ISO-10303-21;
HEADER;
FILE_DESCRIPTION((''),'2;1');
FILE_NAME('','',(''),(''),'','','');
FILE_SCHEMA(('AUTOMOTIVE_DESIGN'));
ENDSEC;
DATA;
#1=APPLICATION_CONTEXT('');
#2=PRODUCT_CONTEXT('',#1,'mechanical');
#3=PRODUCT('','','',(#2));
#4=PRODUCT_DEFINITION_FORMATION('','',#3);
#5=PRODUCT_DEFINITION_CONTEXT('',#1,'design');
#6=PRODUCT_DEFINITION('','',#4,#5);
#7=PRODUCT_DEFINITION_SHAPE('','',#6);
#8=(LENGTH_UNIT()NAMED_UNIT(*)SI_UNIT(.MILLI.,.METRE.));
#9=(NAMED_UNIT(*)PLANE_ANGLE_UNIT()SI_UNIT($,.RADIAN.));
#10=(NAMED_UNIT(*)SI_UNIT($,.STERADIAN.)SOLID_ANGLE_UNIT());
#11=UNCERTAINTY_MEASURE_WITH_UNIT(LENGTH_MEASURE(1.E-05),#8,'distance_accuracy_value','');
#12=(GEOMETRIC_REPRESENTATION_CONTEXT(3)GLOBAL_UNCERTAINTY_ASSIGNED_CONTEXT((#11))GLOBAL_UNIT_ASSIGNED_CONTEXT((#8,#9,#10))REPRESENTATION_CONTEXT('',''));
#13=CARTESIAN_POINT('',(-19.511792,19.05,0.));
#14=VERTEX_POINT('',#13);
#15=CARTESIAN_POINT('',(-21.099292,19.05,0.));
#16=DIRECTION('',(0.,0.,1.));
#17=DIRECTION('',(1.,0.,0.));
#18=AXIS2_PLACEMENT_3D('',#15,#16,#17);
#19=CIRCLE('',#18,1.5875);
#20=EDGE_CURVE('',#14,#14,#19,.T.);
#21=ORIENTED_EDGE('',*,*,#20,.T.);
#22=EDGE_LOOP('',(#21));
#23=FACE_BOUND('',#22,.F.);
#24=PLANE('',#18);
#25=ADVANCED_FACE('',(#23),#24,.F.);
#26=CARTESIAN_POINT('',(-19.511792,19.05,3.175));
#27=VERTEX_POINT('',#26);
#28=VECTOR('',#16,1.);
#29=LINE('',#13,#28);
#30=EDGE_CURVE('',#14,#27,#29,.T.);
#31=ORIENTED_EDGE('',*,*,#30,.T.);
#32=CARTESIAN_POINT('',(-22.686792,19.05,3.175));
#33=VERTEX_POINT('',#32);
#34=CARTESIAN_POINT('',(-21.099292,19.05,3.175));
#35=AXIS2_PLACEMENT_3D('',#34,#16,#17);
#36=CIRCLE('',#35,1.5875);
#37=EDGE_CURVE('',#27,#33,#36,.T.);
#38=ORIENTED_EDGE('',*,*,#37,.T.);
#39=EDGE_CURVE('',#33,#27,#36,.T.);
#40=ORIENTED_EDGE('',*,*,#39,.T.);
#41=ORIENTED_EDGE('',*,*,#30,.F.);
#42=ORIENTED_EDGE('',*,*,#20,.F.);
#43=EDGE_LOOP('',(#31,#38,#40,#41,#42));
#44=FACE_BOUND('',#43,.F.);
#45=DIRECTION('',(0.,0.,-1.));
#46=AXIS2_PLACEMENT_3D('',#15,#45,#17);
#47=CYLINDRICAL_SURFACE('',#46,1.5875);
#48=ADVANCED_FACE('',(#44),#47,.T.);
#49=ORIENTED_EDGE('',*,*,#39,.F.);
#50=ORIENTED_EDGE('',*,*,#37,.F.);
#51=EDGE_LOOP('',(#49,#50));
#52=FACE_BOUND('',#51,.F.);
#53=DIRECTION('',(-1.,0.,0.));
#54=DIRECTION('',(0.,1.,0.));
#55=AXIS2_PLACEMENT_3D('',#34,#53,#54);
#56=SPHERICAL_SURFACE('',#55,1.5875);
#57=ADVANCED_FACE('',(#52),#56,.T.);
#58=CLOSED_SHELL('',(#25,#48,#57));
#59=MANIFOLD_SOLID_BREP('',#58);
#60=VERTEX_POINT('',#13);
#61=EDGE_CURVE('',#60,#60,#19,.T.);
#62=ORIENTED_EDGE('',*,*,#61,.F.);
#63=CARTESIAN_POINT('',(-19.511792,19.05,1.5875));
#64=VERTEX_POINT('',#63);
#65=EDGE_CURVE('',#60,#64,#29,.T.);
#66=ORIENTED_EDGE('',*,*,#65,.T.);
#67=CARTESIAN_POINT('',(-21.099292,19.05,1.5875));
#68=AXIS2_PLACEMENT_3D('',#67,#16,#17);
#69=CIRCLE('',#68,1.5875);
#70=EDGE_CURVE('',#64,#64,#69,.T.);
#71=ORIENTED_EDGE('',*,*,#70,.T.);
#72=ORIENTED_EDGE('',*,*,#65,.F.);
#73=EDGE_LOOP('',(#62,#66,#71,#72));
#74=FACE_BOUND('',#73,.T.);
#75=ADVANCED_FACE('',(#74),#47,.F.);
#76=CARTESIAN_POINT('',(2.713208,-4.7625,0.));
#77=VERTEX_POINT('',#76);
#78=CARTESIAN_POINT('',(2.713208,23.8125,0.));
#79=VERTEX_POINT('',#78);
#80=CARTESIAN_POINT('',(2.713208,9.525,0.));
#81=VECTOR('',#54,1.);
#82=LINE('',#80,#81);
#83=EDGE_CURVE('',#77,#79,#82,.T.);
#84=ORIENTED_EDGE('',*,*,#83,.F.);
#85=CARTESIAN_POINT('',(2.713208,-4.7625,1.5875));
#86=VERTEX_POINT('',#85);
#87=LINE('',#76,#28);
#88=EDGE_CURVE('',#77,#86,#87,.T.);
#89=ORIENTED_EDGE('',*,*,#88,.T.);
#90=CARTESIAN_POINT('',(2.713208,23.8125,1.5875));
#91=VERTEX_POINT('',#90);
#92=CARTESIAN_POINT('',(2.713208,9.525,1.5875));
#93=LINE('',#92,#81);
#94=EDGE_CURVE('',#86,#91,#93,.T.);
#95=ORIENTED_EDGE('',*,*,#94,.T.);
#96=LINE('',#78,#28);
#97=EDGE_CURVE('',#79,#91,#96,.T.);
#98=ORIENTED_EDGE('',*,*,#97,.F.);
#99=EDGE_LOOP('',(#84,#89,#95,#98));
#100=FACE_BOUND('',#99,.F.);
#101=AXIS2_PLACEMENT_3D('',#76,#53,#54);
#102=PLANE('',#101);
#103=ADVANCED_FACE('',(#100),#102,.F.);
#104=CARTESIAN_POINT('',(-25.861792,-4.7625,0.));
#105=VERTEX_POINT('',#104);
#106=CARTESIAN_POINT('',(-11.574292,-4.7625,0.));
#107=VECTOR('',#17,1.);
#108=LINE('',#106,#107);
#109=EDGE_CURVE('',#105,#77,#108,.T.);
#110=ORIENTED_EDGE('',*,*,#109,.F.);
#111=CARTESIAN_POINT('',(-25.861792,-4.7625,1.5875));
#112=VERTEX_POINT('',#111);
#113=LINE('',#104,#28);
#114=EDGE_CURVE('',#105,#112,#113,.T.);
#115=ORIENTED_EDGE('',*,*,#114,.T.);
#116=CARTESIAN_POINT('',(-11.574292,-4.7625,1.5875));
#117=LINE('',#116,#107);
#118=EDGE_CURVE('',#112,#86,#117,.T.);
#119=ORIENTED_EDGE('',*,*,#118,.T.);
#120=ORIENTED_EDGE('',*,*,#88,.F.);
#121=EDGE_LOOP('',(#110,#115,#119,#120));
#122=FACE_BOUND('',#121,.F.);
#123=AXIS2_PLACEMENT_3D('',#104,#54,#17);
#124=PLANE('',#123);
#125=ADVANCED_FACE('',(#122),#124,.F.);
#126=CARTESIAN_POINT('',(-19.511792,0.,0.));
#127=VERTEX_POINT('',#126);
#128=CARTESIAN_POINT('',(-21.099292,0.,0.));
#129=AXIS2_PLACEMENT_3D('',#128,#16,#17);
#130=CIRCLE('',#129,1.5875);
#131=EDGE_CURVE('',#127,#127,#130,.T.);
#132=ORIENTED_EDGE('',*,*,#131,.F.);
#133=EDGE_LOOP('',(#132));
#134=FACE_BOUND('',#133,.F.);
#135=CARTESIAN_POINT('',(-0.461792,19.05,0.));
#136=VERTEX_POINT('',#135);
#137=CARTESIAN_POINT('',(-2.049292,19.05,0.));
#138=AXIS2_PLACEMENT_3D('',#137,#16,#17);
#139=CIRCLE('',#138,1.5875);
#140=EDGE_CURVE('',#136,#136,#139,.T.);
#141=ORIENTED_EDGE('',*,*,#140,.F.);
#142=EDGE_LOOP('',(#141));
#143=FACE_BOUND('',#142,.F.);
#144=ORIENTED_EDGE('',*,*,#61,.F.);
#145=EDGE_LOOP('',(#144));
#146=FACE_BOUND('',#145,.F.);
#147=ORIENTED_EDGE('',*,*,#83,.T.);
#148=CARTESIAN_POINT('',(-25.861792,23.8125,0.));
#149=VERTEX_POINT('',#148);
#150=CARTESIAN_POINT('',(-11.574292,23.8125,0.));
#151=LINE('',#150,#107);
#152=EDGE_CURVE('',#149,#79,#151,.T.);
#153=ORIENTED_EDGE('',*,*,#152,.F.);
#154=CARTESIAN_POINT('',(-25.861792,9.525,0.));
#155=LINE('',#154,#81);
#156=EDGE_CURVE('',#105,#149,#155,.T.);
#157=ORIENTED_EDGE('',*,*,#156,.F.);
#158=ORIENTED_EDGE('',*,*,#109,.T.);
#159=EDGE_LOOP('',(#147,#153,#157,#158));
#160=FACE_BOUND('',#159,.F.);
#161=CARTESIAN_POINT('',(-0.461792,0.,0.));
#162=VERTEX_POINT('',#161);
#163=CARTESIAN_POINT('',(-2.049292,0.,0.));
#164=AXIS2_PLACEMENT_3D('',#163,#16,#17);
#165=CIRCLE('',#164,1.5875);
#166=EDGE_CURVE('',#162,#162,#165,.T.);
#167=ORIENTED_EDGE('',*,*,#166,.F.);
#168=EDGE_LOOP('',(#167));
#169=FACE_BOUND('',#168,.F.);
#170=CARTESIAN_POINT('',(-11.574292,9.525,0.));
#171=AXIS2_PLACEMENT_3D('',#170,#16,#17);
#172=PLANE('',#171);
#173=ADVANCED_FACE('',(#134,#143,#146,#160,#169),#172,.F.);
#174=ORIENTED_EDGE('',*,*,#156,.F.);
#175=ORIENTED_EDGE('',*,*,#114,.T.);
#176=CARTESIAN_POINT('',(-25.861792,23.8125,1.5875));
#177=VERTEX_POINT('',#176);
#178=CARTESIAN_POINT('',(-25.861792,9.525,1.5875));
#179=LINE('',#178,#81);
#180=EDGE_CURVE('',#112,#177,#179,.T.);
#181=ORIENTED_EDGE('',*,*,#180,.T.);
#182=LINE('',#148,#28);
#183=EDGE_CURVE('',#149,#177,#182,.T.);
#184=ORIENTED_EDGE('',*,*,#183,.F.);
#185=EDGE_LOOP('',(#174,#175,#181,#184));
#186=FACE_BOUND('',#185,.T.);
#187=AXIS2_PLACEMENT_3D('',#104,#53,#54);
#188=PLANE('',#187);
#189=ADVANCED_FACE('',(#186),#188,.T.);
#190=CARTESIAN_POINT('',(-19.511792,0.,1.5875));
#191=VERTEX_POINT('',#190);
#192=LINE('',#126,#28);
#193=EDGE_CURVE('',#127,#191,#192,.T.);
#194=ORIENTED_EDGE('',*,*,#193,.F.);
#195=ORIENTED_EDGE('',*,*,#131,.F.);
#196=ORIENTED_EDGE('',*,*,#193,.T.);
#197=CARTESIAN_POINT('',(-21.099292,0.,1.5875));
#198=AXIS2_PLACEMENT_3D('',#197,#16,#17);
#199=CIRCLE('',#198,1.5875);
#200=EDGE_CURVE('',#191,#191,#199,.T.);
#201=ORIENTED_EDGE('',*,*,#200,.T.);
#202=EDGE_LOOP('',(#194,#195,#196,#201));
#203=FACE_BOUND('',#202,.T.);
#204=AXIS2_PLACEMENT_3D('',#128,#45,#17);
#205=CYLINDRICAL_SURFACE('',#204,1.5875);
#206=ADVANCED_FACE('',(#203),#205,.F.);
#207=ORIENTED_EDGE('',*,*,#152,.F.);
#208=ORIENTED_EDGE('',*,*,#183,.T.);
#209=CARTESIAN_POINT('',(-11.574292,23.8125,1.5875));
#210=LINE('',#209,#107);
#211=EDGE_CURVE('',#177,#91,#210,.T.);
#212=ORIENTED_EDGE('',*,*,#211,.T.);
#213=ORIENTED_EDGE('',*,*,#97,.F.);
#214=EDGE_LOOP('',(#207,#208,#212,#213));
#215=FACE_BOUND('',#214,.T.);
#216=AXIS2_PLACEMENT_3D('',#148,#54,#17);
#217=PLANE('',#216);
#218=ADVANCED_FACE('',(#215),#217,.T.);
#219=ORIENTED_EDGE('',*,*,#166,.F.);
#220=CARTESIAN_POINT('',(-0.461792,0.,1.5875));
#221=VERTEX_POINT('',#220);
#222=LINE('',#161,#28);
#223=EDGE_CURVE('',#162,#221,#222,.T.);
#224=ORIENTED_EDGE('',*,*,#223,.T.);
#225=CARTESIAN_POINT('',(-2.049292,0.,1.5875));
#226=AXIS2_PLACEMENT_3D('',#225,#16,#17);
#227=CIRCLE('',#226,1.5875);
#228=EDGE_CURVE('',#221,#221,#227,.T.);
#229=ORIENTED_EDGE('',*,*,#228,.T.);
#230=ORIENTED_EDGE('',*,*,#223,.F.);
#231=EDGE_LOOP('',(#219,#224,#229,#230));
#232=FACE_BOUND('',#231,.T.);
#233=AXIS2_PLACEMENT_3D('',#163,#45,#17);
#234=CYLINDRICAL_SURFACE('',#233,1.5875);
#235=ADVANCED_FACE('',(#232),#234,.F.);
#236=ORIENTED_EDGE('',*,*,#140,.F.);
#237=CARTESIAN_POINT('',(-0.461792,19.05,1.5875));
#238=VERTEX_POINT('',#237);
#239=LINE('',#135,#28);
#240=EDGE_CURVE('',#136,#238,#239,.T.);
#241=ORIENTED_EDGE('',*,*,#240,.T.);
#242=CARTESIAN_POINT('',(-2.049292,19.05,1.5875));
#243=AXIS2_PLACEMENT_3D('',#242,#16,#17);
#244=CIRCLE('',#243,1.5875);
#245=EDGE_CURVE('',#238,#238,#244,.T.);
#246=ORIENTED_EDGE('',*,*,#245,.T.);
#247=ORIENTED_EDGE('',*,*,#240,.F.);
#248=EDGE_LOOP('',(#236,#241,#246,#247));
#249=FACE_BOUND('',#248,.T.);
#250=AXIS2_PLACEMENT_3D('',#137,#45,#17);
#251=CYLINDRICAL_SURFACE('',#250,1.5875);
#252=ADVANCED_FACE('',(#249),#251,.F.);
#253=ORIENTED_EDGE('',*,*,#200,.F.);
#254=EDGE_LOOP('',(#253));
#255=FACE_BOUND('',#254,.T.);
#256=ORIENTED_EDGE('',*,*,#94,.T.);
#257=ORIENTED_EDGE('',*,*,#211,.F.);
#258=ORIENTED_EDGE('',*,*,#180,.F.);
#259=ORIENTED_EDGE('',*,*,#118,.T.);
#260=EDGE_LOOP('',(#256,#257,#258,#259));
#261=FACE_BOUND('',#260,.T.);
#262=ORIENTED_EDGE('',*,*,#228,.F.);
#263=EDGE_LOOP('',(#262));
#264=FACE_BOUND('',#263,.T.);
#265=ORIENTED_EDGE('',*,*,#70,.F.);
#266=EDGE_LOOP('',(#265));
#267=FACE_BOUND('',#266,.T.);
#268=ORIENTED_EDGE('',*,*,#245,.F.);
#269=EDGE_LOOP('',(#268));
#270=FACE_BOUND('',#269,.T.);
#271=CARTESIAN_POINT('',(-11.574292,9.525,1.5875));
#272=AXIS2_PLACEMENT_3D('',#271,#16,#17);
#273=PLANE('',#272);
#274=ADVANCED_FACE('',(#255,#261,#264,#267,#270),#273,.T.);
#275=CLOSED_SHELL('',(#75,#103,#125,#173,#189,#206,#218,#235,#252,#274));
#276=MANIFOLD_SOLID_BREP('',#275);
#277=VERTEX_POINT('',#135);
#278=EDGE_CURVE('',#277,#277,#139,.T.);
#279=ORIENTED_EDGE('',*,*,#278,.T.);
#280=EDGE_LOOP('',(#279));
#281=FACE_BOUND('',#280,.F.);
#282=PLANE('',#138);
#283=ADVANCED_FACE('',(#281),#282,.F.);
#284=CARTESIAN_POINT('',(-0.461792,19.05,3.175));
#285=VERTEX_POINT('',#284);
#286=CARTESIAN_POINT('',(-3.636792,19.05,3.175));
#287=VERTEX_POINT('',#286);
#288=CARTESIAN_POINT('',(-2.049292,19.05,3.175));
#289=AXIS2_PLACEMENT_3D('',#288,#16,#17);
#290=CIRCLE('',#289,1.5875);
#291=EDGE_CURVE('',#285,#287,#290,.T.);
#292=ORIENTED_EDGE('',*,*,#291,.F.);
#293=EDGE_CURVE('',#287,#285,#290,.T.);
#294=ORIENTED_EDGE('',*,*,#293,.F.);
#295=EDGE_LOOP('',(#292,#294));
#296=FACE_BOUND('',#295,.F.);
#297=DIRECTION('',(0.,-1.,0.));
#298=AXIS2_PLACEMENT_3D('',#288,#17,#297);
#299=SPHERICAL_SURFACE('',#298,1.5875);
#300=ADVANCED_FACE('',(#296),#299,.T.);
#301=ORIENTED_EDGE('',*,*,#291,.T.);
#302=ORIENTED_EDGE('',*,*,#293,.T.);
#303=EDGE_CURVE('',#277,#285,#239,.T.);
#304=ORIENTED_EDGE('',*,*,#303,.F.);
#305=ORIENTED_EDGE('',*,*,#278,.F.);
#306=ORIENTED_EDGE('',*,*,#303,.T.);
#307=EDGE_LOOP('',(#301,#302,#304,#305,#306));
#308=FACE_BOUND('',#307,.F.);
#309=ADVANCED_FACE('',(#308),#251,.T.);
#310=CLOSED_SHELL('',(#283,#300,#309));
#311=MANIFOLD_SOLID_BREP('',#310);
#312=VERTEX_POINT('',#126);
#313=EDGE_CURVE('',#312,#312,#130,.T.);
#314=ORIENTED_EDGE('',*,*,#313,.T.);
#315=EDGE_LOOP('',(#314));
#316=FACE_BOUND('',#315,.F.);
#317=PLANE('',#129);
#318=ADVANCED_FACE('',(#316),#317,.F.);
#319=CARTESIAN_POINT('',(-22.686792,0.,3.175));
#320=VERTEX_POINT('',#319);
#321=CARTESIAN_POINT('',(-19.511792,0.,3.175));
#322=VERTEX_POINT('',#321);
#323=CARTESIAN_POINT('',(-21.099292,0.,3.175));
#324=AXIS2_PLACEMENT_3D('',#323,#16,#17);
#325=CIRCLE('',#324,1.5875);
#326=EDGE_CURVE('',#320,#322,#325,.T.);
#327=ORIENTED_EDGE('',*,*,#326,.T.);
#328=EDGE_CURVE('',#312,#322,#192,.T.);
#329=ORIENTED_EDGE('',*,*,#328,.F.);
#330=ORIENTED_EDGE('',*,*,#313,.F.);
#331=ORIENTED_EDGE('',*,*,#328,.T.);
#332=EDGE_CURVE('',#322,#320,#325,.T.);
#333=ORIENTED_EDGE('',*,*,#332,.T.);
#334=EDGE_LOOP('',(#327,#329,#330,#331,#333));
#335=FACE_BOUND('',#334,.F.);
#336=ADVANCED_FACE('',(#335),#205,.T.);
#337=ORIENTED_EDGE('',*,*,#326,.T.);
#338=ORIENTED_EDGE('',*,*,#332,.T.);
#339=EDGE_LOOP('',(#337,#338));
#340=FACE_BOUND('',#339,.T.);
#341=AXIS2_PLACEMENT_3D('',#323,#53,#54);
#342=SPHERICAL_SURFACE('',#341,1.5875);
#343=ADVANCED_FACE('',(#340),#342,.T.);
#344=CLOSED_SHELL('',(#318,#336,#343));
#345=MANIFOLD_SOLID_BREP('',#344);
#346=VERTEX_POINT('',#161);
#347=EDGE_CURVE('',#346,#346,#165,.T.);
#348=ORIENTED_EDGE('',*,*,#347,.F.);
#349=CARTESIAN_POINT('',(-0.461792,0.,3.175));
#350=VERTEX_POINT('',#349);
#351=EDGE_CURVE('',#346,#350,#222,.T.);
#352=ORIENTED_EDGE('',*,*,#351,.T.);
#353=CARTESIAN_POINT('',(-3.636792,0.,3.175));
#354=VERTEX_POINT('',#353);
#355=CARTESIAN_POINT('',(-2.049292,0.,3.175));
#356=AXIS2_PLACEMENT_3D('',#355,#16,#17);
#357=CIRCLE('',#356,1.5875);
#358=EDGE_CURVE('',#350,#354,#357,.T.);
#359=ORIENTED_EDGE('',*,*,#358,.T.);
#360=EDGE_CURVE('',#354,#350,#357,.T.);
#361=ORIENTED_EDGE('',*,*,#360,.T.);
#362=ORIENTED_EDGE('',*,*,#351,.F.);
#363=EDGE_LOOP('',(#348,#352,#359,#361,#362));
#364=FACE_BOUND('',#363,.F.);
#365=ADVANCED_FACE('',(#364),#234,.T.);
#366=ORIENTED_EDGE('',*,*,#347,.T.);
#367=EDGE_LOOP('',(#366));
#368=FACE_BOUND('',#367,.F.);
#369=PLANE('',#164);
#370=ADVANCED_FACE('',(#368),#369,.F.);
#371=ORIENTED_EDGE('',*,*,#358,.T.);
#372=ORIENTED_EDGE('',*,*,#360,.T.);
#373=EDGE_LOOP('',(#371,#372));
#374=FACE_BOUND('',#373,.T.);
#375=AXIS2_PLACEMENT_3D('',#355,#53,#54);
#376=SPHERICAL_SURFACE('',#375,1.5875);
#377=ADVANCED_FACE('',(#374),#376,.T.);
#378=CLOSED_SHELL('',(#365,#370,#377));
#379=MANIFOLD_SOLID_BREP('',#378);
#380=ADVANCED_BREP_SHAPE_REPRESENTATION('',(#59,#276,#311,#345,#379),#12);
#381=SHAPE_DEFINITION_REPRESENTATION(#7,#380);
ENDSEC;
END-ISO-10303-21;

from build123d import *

# Parameters (mm, degrees)
F0_R     = 1.5875
F1_DEPTH = 3.175
F0_W     = 28.575
F0_H     = 28.575
F2_DEPTH = 1.5875


with BuildPart() as f1:
    # F0 (on Top) → F1 (new body)
    with BuildSketch(Plane.XY):
        with Locations((-21.0992920049, 19.05)):
            Circle(F0_R)
    extrude(amount=F1_DEPTH)

    # F7 (on face) → F8 (revolve)
    with BuildSketch(Plane.XY.offset(3.175)):
        with BuildLine():
            Line((-22.6867920049, 19.05), (-21.0992920049, 19.05))
            Line((-21.0992920049, 19.05), (-19.5117920049, 19.05))
            ThreePointArc((-19.5117920049, 19.05), (-21.0992920049, 20.6375), (-22.6867920049, 19.05))
        make_face()
    revolve(axis=Axis((-21.0992920049, 19.05, 3.175), (1, 0, 0)))


with BuildPart() as f1b:
    # F0 (on Top) → F1, piece 2 (new body)
    with BuildSketch(Plane.XY):
        with Locations((-2.0492920049, 19.05)):
            Circle(F0_R)
    extrude(amount=F1_DEPTH)

    # F9 (on face) → F10 (revolve)
    with BuildSketch(Plane.XY.offset(3.175)):
        with BuildLine():
            Line((-0.4617920049, 19.05), (-2.0492920049, 19.05))
            Line((-2.0492920049, 19.05), (-3.6367920049, 19.05))
            ThreePointArc((-3.6367920049, 19.05), (-2.0492920049, 17.4625), (-0.4617920049, 19.05))
        make_face()
    revolve(axis=Axis((-2.0492920049, 19.05, 3.175), (-1, 0, 0)))


with BuildPart() as f1c:
    # F0 (on Top) → F1, piece 3 (new body)
    with BuildSketch(Plane.XY):
        with Locations((-2.0492920049, 0)):
            Circle(F0_R)
    extrude(amount=F1_DEPTH)

    # F5 (on face) → F6 (revolve)
    with BuildSketch(Plane.XY.offset(3.175)):
        with BuildLine():
            Line((-3.6367920049, 0), (-0.4617920049, 0))
            ThreePointArc((-0.4617920049, 0), (-2.0492920049, 1.5875), (-3.6367920049, 0))
        make_face()
    revolve(axis=Axis((-2.0492920049, 0, 3.175), (-1, 0, 0)))


with BuildPart() as f1d:
    # F0 (on Top) → F1, piece 4 (new body)
    with BuildSketch(Plane.XY):
        with Locations((-21.0992920049, 0)):
            Circle(F0_R)
    extrude(amount=F1_DEPTH)

    # F3 (on face) → F4 (revolve)
    with BuildSketch(Plane.XY.offset(3.175)):
        with BuildLine():
            Line((-22.6867920049, 0), (-19.5117920049, 0))
            ThreePointArc((-19.5117920049, 0), (-21.0992920049, 1.5875), (-22.6867920049, 0))
        make_face()
    revolve(axis=Axis((-21.0992920049, 0, 3.175), (-1, 0, 0)))


with BuildPart() as f2:
    # F0 (on Top) → F2 (new body)
    with BuildSketch(Plane.XY):
        with Locations((-11.5742920049, 9.525)):
            Rectangle(F0_W, F0_H)
        with Locations((-21.0992920049, 0)):
            Circle(F0_R, mode=Mode.SUBTRACT)
        with Locations((-2.0492920049, 0)):
            Circle(F0_R, mode=Mode.SUBTRACT)
        with Locations((-21.0992920049, 19.05)):
            Circle(F0_R, mode=Mode.SUBTRACT)
        with Locations((-2.0492920049, 19.05)):
            Circle(F0_R, mode=Mode.SUBTRACT)
    extrude(amount=F2_DEPTH)


solid = Compound([f1.part, f1b.part, f1c.part, f1d.part, f2.part])
